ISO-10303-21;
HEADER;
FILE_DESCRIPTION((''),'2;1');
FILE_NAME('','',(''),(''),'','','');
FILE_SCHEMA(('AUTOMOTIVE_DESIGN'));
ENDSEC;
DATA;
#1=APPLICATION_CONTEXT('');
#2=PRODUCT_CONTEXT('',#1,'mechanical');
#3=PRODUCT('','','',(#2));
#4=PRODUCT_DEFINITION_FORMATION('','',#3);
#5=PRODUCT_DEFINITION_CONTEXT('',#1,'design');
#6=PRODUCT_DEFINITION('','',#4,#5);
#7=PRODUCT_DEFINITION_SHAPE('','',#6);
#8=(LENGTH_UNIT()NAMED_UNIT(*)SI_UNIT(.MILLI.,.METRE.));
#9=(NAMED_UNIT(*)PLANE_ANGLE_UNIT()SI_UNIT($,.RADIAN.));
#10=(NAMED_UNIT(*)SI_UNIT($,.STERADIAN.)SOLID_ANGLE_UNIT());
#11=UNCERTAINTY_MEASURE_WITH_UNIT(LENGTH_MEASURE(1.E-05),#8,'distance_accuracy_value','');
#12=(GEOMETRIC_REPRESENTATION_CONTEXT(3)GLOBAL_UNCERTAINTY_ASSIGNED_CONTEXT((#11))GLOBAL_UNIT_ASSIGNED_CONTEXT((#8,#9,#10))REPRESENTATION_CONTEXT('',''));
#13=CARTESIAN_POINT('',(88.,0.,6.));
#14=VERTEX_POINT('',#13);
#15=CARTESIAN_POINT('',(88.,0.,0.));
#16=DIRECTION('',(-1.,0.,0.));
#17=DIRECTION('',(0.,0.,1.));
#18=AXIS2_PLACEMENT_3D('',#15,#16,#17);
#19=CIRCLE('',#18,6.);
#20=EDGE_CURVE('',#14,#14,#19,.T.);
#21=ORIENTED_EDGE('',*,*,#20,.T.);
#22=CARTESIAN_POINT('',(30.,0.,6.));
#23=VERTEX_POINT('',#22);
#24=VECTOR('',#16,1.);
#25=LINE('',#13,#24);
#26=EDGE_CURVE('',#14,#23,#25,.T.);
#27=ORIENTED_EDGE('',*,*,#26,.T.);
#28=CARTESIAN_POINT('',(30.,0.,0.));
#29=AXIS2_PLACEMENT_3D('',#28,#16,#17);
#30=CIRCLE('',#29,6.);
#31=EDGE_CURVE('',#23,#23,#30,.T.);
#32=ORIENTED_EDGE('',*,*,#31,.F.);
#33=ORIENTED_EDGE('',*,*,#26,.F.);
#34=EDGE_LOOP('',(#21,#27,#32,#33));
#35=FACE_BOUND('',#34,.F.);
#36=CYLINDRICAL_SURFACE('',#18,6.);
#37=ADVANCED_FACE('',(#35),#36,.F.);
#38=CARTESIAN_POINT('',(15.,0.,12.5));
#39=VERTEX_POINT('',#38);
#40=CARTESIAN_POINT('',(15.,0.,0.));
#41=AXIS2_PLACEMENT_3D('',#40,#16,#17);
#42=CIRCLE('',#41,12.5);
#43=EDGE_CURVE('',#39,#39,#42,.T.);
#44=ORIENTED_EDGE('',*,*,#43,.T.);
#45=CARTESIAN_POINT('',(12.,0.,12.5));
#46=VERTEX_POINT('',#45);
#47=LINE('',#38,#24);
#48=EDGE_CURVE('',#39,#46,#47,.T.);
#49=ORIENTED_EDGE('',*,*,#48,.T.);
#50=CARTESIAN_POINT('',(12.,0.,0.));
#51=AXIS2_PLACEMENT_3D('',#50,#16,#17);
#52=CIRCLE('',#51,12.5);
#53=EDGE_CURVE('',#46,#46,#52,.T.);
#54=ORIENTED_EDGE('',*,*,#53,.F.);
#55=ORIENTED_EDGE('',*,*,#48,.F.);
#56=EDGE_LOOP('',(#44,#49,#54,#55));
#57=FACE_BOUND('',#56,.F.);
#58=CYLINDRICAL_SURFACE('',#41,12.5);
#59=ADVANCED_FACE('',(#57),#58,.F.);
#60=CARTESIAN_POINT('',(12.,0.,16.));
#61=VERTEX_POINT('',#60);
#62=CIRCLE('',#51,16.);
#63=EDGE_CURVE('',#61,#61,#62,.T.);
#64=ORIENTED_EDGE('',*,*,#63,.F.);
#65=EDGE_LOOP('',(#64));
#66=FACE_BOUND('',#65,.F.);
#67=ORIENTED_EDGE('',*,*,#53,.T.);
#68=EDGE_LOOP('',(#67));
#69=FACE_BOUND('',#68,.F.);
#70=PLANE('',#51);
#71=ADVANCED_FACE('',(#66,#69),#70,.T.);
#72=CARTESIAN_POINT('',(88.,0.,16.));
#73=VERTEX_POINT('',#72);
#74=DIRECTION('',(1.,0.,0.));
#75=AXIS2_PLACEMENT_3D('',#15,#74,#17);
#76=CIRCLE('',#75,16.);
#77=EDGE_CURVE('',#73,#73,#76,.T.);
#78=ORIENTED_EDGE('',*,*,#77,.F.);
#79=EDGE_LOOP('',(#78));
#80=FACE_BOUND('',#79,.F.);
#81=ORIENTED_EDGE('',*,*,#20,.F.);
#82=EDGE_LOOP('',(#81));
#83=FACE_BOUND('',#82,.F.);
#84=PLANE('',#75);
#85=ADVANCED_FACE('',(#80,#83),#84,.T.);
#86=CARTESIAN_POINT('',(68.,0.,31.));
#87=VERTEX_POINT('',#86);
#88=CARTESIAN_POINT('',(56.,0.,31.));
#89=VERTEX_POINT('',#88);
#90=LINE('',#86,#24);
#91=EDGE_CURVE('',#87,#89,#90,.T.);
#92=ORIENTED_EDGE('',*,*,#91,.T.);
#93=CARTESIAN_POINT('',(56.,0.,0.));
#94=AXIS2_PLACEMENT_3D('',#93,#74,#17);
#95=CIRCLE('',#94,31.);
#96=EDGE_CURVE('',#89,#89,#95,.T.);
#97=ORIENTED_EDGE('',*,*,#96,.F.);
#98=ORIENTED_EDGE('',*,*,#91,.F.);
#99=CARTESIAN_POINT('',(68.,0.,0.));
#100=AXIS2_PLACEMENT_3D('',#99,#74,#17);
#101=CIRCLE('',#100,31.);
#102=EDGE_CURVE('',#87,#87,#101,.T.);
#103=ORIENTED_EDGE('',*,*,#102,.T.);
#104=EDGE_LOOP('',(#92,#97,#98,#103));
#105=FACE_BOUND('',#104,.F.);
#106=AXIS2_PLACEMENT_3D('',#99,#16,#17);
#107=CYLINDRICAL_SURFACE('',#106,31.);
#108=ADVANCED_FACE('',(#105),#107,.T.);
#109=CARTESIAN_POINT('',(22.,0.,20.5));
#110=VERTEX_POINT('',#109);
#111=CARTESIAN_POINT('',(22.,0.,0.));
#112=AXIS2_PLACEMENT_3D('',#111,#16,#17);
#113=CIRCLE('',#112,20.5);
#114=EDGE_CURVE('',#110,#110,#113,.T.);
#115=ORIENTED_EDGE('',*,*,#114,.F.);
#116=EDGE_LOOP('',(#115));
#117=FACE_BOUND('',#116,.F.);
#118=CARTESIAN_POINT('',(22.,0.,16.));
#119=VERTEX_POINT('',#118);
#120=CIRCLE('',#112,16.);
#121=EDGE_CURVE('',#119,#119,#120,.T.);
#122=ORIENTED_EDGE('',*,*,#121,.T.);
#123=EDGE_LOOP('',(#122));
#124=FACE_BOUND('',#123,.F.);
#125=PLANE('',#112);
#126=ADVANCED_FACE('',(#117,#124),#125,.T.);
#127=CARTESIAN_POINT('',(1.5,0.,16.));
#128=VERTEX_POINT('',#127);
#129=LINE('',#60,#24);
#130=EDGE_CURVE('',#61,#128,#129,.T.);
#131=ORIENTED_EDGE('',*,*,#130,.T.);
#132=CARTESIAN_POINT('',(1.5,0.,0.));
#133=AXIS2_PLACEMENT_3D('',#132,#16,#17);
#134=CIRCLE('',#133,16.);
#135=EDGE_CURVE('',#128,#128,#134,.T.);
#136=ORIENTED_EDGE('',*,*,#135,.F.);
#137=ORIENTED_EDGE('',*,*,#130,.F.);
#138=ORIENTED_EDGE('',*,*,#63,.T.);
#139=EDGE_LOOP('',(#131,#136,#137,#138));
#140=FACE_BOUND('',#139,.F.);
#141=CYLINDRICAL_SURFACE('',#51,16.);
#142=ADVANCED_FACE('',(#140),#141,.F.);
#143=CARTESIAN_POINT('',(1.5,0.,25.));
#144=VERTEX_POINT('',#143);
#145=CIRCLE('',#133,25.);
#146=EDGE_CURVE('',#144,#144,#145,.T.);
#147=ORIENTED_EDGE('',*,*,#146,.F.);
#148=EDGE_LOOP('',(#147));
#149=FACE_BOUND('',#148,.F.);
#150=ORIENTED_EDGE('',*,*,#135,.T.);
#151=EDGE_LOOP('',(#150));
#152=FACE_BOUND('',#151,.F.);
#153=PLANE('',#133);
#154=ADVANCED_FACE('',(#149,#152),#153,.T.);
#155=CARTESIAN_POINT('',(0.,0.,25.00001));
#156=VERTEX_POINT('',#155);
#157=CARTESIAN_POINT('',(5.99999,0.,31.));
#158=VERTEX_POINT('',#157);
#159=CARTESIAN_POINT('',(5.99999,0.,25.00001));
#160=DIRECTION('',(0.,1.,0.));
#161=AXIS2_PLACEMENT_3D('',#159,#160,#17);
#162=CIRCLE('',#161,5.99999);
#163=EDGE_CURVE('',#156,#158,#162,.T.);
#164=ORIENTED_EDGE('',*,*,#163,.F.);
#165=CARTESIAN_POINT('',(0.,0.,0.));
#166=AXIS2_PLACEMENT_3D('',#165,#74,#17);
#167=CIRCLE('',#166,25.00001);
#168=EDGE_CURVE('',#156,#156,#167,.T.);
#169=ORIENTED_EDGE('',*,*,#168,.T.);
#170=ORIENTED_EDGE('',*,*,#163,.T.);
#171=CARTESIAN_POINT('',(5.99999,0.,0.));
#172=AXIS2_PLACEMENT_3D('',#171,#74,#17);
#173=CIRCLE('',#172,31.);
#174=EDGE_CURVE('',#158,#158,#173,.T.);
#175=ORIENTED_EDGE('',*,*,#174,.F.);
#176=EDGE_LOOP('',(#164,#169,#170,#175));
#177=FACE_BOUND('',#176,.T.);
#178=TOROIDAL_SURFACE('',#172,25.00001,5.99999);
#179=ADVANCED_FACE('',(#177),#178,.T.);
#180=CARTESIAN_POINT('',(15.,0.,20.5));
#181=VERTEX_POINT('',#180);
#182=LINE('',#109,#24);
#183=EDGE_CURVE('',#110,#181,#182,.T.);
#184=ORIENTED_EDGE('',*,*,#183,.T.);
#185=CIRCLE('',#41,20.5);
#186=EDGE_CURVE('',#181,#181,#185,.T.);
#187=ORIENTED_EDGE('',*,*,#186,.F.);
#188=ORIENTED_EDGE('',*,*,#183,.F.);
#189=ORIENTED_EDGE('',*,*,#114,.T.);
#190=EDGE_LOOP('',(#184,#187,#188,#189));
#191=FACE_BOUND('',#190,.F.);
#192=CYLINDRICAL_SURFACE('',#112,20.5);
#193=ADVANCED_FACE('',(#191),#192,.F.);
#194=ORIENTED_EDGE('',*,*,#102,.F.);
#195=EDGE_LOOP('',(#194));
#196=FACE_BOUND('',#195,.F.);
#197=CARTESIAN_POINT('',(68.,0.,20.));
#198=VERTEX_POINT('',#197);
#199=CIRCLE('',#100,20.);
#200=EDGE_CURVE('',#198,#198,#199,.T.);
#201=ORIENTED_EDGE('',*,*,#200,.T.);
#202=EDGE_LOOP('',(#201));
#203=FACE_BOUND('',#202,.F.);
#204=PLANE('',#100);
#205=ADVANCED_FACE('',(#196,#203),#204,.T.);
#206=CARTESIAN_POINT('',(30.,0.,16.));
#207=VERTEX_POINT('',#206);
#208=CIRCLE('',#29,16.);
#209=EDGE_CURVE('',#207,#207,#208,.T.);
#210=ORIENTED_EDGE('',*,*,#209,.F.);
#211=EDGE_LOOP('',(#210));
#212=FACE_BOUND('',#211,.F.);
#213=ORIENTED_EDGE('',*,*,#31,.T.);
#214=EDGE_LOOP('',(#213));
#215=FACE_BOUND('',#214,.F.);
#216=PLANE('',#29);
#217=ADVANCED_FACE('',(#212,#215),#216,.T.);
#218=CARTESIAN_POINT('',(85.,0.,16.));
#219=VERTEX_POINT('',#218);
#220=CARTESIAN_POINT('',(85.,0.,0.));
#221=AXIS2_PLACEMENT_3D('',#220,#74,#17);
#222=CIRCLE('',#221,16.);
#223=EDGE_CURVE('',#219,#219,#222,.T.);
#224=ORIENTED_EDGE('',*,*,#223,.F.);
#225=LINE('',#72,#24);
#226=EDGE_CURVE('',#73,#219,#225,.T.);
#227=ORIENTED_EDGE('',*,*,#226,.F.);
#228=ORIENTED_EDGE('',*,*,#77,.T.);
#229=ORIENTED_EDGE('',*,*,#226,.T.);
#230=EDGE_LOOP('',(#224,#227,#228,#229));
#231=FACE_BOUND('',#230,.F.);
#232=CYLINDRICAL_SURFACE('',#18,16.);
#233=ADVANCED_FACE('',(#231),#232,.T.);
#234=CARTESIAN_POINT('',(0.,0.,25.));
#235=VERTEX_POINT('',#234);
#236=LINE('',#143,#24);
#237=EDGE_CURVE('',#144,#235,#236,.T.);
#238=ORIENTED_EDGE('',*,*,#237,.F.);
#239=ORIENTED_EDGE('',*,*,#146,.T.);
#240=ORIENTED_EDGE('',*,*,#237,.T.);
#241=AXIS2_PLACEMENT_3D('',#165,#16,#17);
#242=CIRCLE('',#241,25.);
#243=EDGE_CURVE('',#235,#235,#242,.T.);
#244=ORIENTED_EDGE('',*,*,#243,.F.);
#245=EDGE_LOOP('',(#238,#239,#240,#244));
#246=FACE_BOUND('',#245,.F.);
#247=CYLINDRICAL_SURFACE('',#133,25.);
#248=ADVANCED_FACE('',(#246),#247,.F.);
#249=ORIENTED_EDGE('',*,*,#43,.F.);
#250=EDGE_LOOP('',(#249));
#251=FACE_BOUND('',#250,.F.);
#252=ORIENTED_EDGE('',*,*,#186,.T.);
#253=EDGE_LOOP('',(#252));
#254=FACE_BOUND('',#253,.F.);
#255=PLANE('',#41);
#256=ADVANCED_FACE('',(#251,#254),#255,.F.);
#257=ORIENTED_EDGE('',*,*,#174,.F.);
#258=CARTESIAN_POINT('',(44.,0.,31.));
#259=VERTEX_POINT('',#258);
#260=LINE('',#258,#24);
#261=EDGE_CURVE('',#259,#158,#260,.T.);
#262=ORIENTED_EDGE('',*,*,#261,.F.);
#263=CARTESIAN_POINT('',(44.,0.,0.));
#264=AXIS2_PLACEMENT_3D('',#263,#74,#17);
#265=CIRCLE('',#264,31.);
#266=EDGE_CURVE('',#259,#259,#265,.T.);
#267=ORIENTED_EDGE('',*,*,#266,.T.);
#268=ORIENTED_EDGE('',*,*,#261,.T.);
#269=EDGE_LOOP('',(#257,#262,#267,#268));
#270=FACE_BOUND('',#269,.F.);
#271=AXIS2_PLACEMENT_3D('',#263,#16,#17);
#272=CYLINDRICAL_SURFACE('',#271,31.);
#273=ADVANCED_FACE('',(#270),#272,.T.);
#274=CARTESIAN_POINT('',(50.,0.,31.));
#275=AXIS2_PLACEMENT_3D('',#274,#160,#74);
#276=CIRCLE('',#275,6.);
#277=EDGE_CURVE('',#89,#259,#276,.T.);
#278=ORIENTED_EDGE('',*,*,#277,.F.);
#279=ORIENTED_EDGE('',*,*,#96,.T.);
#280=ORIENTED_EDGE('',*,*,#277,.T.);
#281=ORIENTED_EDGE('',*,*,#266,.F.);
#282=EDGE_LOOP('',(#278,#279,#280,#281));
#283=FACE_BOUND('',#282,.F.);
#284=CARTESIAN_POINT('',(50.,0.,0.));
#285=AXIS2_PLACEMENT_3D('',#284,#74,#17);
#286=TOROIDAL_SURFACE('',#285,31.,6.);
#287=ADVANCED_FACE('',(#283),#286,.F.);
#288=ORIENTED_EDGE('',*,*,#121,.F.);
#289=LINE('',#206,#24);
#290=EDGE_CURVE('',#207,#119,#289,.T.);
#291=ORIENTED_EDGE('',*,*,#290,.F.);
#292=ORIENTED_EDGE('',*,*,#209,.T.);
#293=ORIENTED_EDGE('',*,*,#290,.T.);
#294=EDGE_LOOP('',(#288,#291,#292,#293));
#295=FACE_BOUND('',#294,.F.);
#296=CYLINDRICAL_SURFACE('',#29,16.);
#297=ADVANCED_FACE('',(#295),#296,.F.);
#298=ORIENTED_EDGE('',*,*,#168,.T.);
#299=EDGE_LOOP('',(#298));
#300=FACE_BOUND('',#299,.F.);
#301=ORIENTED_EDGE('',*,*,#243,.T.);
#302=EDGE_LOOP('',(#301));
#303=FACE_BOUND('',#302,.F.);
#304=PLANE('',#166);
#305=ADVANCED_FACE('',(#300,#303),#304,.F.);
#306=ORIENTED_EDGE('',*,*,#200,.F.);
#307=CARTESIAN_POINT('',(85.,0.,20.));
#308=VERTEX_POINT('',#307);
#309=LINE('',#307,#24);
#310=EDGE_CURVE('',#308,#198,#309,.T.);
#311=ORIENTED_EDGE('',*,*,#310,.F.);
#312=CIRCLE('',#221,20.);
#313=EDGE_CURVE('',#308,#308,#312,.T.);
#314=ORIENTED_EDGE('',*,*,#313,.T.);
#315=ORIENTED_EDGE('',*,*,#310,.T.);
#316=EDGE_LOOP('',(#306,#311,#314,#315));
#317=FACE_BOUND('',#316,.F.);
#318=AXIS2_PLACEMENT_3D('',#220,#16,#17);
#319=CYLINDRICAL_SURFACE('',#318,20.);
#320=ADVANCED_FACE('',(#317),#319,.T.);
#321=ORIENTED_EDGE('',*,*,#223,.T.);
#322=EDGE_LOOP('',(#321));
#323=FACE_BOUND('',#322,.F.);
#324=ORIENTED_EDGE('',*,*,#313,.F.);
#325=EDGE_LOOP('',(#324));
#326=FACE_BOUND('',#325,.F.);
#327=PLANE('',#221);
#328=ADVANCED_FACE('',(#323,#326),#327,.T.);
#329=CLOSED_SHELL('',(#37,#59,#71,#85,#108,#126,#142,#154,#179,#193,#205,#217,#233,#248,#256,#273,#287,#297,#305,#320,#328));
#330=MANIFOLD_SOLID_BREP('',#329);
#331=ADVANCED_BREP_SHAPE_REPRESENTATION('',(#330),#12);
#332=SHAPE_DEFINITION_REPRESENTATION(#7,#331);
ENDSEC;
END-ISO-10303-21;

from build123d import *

# Parameters (mm, degrees)
F4_R = 5.99999


# Not quite as in the source:
# - a fillet or chamfer is up to 0.001 mm smaller than in the source, because OpenCascade refuses the exact size


with BuildPart() as f1:
    # F0 (on Front) → F1 (revolve)
    with BuildSketch(Plane.XZ):
        with BuildLine():
            Line((0, 31), (0, 0))
            Line((0, 0), (88, 0))
            Line((88, 0), (88, 16))
            Line((88, 16), (85, 16))
            Line((85, 16), (85, 20))
            Line((85, 20), (68, 20))
            Line((68, 20), (68, 31))
            Line((68, 31), (56, 31))
            ThreePointArc((56, 31), (50, 25), (44, 31))
            Line((44, 31), (0, 31))
        make_face()
    revolve(axis=Axis((50, 0, 0), (1, 0, 0)))

    # F2 (on Front) → F3 (revolve, cut)
    with BuildSketch(Plane.XZ):
        Polygon((0, 25), (0, 0), (88, 0), (88, 6), (30, 6), (30, 16), (22, 16), (22, 20.5), (15, 20.5), (15, 12.5), (12, 12.5), (12, 16), (1.5, 16), (1.5, 25), align=None)
    revolve(axis=Axis((-8.7147882535, 0, 0), (-1, 0, 0)), mode=Mode.SUBTRACT)

    # F4 (radius 6 in the source; OpenCascade refuses exactly that, so slightly less here)
    f4_edges = [f1.edges().sort_by_distance(p)[0] for p in [
        (0, 0, -31),
    ]]
    fillet(f4_edges, radius=F4_R)


solid = f1.part
